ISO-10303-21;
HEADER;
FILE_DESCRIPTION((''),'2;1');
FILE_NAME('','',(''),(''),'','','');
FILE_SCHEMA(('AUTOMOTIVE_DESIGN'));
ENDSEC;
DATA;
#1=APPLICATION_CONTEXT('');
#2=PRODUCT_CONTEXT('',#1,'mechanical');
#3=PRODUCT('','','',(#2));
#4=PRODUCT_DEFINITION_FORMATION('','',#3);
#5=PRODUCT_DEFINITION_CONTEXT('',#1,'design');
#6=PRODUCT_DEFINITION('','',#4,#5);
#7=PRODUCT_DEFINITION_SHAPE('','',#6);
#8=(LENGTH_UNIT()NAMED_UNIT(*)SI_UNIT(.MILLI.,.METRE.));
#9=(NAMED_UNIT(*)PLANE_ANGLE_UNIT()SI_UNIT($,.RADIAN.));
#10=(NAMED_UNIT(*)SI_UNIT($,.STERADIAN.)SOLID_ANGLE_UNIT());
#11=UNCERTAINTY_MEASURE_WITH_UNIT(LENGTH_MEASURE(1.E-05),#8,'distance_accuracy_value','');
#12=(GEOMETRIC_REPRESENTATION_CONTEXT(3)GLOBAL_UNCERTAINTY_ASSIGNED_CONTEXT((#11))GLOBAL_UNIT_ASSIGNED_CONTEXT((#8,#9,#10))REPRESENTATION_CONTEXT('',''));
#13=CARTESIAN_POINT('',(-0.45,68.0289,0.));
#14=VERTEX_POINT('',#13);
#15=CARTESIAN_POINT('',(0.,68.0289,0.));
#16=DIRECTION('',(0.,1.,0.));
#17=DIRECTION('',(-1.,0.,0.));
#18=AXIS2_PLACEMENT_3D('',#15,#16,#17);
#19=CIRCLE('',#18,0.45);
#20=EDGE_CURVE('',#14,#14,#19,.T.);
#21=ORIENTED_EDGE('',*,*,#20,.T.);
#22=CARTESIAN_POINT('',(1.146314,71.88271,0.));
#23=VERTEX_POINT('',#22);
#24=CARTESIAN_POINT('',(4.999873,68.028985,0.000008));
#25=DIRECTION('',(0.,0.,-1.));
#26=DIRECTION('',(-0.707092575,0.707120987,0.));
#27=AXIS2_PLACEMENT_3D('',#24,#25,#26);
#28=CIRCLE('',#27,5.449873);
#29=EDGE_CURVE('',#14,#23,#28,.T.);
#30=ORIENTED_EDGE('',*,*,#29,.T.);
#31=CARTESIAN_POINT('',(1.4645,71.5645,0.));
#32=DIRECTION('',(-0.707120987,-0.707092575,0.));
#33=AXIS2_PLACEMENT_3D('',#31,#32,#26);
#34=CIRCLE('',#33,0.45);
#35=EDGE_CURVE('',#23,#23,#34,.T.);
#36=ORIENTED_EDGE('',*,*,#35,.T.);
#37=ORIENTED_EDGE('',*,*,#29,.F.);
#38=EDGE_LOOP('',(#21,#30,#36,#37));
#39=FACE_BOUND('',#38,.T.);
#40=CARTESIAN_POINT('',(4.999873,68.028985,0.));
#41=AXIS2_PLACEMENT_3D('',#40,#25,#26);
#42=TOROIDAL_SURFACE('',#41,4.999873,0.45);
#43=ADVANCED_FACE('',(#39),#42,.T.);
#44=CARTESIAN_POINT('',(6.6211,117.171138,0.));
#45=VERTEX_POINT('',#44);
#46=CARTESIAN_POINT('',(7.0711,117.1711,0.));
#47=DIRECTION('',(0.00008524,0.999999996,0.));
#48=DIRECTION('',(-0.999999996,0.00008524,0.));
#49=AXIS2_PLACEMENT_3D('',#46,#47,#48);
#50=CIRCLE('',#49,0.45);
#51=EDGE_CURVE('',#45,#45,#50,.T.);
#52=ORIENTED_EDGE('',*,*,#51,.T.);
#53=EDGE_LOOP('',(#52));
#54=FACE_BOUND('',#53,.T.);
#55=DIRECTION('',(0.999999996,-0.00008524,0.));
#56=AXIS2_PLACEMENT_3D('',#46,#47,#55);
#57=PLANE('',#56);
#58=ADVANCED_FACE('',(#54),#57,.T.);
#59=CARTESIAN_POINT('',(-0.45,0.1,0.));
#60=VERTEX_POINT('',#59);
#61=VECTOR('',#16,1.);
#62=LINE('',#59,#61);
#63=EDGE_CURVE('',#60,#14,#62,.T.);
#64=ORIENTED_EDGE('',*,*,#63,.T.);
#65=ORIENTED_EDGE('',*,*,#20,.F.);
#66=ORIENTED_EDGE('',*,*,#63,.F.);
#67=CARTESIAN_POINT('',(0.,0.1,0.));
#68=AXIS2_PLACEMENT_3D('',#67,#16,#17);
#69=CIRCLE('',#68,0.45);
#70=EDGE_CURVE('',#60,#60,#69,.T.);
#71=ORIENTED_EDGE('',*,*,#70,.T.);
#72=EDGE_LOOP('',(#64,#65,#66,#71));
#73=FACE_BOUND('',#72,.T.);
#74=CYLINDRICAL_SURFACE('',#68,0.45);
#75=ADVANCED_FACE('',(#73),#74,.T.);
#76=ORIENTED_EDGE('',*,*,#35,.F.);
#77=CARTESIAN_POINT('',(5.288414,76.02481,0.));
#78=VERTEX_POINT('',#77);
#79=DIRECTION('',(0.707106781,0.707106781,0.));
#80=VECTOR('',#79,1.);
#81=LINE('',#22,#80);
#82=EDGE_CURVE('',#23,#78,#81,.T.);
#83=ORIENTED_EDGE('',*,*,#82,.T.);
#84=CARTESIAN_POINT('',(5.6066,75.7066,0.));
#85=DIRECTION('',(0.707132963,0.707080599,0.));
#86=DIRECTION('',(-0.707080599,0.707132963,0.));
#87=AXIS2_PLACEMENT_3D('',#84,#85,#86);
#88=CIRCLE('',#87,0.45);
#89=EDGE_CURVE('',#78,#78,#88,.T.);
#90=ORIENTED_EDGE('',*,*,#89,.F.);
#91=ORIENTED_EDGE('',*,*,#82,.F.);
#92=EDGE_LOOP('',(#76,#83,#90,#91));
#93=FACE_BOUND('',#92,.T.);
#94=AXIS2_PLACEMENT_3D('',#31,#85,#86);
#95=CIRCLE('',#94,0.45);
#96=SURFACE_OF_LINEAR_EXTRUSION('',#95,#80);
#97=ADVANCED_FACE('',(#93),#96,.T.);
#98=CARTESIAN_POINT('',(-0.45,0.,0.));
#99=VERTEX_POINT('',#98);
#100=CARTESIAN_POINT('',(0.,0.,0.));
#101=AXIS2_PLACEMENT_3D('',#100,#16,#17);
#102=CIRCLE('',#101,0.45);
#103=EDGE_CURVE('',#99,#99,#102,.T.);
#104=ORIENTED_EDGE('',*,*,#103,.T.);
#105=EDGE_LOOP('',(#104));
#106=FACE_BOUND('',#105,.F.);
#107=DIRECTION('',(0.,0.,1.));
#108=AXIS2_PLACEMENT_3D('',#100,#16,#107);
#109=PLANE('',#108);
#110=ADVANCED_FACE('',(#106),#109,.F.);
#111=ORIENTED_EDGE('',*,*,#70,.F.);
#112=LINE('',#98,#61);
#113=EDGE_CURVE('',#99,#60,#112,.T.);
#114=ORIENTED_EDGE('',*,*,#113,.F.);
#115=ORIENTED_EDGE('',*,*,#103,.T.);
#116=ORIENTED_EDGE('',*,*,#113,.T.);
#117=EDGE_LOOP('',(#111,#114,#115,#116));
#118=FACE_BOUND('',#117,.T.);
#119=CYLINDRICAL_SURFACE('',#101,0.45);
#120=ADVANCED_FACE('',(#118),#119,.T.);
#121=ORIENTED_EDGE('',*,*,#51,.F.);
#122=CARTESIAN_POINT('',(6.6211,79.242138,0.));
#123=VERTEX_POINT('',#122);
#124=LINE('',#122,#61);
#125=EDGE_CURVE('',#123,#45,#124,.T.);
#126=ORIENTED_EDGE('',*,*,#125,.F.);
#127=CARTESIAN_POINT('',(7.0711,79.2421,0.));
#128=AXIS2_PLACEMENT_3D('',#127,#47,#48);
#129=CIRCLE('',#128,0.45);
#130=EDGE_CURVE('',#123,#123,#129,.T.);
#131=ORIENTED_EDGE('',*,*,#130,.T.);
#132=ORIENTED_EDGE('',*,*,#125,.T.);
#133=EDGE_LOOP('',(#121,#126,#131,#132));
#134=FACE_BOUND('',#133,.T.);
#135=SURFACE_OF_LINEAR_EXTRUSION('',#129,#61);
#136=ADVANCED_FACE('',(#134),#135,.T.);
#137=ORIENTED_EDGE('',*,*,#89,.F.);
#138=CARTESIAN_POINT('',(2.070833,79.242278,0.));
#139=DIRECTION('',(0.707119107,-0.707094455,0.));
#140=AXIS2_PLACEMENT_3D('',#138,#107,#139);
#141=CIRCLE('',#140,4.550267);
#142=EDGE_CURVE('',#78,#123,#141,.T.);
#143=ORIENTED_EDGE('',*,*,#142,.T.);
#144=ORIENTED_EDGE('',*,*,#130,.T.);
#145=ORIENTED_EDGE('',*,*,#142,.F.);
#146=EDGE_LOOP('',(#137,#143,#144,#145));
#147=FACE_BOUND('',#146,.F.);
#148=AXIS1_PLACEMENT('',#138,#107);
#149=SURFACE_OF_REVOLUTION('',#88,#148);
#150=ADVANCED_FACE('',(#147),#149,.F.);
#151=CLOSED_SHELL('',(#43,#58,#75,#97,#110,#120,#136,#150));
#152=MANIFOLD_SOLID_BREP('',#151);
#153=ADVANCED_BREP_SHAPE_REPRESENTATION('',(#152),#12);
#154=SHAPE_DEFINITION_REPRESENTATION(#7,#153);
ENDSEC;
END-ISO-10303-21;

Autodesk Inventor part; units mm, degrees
ref_plane "YZ Plane" through (0, 0, 0) normal (1, 0, 0) x (0, 1, 0)
ref_plane "XZ Plane" through (0, 0, 0) normal (0, 1, 0) x (-1, 0, 0)
ref_plane "XY Plane" through (0, 0, 0) normal (0, 0, 1) x (1, 0, 0)
sketch "Sketch1" plane through (0, 0, 0) normal (0, 1, 0) x (-1, 0, 0)
  circle A0 centre (0, 0) radius 0.45
  dimension "d0" = 0.9
sketch "Sketch2" plane through (0, 0, 0) normal (0, 0, 1) x (1, 0, 0)
  line L0 (0, 0) -> (0, 0.1)
  line L1 (0, 0.1) -> (0, 68.0289)
  line L2 (1.4645, 71.5645) -> (5.6066, 75.7066)
  line L3 (7.0711, 79.2421) -> (7.0711, 117.1711)
  arc A0 (5.6066, 75.7066) -> (7.0711, 79.2421) centre (2.0711, 79.2421) ccw
  arc A1 (1.4645, 71.5645) -> (0, 68.0289) centre (5, 68.0289) ccw
  point P0 (0, 70.1)
  point P1 (7.0711, 77.1711)
  dimension "d1" = 0.1
  dimension "d6" = 10
  dimension "d7" = 40
  dimension "d8" = 5
  dimension "d9" = 5
sweep "Sweep2" add profiles "Sketch1" path "Sketch2"
properties part number "cable meñique"
